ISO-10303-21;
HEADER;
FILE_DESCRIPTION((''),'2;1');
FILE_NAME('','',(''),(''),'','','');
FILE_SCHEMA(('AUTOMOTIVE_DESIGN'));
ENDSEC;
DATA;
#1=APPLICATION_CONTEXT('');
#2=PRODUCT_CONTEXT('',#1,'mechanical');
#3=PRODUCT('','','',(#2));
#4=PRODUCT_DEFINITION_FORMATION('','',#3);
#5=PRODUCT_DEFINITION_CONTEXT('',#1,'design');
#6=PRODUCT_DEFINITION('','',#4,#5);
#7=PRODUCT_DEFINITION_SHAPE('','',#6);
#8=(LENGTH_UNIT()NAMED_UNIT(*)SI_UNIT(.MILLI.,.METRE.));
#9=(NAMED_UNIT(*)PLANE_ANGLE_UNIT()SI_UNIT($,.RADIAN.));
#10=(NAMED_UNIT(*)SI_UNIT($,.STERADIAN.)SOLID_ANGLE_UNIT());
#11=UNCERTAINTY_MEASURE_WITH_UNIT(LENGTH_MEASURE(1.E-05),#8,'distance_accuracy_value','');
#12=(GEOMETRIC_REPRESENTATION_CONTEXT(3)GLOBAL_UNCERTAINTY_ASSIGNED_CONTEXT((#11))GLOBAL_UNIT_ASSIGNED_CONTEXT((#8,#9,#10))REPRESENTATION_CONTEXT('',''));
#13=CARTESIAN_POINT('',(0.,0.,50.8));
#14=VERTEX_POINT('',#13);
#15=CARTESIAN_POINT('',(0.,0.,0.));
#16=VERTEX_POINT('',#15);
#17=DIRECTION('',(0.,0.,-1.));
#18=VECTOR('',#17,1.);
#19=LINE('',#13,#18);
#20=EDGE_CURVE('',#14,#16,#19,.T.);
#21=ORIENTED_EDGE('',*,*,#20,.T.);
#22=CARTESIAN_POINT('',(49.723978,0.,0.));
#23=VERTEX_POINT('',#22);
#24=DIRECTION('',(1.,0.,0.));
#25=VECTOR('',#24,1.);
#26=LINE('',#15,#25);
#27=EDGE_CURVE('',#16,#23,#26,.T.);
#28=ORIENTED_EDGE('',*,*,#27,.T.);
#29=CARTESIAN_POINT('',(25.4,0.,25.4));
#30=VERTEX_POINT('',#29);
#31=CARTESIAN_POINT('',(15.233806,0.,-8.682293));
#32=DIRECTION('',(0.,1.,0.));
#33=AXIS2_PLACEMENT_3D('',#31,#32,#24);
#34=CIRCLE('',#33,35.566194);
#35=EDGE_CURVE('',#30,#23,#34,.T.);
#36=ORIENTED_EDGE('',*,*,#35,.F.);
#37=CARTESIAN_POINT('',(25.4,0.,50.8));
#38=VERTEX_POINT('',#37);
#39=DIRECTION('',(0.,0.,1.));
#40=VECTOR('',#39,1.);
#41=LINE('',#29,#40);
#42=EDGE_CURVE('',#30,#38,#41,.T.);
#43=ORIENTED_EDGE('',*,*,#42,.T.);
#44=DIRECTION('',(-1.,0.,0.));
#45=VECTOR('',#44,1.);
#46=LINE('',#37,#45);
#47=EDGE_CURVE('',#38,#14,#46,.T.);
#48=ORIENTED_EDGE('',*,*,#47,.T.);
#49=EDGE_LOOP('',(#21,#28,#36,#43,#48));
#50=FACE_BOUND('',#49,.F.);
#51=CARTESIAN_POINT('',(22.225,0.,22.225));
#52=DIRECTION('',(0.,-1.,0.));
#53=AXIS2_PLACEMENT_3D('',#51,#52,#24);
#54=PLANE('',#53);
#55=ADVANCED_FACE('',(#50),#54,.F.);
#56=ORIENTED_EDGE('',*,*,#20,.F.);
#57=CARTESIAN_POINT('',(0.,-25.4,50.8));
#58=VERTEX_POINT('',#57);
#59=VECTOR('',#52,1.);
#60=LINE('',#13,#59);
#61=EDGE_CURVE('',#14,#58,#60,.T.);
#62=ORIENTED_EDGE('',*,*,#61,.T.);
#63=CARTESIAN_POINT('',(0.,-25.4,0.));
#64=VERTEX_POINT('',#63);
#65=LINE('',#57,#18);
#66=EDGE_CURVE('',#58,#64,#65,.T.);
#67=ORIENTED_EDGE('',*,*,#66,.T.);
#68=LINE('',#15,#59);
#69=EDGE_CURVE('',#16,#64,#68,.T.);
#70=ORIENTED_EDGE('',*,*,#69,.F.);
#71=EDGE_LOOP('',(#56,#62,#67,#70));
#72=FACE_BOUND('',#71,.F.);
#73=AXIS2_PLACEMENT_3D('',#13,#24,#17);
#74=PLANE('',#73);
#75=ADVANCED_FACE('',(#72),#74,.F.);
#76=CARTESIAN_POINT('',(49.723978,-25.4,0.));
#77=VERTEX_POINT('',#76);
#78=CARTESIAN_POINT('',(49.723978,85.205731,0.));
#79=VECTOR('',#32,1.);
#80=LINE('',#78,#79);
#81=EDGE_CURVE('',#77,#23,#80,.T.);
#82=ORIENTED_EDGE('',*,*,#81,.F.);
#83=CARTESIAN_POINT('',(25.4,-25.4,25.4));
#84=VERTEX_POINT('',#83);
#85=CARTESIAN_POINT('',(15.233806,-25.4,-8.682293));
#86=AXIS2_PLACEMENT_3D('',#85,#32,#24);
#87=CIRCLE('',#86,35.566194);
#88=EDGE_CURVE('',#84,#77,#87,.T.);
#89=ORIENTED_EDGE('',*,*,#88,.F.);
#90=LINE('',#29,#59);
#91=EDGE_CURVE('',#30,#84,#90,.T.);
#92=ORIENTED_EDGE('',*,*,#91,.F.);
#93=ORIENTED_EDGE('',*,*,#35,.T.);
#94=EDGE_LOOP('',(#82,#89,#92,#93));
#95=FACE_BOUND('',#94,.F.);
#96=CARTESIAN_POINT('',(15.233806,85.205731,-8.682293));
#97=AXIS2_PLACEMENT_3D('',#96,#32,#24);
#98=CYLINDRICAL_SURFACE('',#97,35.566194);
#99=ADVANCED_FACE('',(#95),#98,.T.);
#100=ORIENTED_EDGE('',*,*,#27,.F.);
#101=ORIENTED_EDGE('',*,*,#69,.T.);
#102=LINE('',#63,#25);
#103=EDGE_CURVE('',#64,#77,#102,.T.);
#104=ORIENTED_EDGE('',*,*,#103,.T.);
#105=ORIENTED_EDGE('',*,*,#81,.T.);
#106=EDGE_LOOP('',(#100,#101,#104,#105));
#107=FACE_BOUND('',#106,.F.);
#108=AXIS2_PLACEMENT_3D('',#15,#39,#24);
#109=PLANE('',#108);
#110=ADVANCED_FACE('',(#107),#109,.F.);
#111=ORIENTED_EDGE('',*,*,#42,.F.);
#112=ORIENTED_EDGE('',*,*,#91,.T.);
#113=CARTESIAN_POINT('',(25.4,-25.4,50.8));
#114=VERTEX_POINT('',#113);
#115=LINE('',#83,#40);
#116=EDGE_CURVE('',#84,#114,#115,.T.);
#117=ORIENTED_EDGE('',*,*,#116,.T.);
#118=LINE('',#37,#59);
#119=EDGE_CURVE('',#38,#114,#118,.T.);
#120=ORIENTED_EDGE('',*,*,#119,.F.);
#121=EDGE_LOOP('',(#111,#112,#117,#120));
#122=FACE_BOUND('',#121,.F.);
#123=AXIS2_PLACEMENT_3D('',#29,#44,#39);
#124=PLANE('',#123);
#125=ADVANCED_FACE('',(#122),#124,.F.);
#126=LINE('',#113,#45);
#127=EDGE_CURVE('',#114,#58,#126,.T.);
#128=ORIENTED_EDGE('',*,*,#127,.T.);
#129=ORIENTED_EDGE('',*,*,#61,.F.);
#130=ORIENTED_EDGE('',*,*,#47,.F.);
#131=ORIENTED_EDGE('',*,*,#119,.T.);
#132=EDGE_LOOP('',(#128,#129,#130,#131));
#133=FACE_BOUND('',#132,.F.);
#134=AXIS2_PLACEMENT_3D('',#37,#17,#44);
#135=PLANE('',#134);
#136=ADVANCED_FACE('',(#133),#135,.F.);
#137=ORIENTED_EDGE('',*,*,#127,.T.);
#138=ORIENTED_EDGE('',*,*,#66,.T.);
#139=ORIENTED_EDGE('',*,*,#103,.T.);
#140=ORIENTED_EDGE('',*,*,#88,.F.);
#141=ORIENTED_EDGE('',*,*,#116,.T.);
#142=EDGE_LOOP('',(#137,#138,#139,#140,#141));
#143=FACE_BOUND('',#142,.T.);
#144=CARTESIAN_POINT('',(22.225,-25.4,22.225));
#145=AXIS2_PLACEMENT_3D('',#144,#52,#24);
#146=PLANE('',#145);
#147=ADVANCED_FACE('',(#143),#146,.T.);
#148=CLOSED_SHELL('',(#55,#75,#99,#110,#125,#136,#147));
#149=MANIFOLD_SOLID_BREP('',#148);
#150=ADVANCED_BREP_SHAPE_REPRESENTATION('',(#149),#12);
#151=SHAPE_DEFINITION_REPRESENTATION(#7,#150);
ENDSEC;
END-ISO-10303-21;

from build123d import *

# Parameters (mm, degrees)
F1_DEPTH    = 25.4
F2_T1_DEPTH = 195.8114627457


# Not quite as in the source:
# - a fillet or chamfer that OpenCascade refuses, or shapes differently, is made with other operations: its cross-section is extruded or revolved along the edge and cut away or added


with BuildPart() as f1:
    # F0 (on Front) → F1 (new body)
    with BuildSketch(Plane.XZ):
        Polygon((0, 50.8), (0, 0), (50.8, 0), (50.8, 25.4), (25.4, 25.4), (25.4, 50.8), align=None)
    extrude(amount=F1_DEPTH)

    # F2: fillet of radius 35.5661942009 on 1 edges, made by hand

    # F2_s2 → F2_t1 (cut)
    with BuildSketch(Plane.XZ.offset(-85.2057313728)):
        with BuildLine():
            ThreePointArc((50.8, -8.6822925491), (43.7515810206, 12.5707229158), (25.4, 25.4))
            Line((25.4, 25.4), (25.603323884, 26.081645851))
            ThreePointArc((25.603323884, 26.081645851), (38.1, 26.111323884), (50.8, 26.111323884))
            Line((50.8, 26.111323884), (51.511323884, 25.4))
            Line((51.511323884, 25.4), (51.511323884, -8.6822925491))
            Line((51.511323884, -8.6822925491), (50.8, -8.6822925491))
        make_face()
    extrude(amount=F2_T1_DEPTH, mode=Mode.SUBTRACT)


solid = f1.part
